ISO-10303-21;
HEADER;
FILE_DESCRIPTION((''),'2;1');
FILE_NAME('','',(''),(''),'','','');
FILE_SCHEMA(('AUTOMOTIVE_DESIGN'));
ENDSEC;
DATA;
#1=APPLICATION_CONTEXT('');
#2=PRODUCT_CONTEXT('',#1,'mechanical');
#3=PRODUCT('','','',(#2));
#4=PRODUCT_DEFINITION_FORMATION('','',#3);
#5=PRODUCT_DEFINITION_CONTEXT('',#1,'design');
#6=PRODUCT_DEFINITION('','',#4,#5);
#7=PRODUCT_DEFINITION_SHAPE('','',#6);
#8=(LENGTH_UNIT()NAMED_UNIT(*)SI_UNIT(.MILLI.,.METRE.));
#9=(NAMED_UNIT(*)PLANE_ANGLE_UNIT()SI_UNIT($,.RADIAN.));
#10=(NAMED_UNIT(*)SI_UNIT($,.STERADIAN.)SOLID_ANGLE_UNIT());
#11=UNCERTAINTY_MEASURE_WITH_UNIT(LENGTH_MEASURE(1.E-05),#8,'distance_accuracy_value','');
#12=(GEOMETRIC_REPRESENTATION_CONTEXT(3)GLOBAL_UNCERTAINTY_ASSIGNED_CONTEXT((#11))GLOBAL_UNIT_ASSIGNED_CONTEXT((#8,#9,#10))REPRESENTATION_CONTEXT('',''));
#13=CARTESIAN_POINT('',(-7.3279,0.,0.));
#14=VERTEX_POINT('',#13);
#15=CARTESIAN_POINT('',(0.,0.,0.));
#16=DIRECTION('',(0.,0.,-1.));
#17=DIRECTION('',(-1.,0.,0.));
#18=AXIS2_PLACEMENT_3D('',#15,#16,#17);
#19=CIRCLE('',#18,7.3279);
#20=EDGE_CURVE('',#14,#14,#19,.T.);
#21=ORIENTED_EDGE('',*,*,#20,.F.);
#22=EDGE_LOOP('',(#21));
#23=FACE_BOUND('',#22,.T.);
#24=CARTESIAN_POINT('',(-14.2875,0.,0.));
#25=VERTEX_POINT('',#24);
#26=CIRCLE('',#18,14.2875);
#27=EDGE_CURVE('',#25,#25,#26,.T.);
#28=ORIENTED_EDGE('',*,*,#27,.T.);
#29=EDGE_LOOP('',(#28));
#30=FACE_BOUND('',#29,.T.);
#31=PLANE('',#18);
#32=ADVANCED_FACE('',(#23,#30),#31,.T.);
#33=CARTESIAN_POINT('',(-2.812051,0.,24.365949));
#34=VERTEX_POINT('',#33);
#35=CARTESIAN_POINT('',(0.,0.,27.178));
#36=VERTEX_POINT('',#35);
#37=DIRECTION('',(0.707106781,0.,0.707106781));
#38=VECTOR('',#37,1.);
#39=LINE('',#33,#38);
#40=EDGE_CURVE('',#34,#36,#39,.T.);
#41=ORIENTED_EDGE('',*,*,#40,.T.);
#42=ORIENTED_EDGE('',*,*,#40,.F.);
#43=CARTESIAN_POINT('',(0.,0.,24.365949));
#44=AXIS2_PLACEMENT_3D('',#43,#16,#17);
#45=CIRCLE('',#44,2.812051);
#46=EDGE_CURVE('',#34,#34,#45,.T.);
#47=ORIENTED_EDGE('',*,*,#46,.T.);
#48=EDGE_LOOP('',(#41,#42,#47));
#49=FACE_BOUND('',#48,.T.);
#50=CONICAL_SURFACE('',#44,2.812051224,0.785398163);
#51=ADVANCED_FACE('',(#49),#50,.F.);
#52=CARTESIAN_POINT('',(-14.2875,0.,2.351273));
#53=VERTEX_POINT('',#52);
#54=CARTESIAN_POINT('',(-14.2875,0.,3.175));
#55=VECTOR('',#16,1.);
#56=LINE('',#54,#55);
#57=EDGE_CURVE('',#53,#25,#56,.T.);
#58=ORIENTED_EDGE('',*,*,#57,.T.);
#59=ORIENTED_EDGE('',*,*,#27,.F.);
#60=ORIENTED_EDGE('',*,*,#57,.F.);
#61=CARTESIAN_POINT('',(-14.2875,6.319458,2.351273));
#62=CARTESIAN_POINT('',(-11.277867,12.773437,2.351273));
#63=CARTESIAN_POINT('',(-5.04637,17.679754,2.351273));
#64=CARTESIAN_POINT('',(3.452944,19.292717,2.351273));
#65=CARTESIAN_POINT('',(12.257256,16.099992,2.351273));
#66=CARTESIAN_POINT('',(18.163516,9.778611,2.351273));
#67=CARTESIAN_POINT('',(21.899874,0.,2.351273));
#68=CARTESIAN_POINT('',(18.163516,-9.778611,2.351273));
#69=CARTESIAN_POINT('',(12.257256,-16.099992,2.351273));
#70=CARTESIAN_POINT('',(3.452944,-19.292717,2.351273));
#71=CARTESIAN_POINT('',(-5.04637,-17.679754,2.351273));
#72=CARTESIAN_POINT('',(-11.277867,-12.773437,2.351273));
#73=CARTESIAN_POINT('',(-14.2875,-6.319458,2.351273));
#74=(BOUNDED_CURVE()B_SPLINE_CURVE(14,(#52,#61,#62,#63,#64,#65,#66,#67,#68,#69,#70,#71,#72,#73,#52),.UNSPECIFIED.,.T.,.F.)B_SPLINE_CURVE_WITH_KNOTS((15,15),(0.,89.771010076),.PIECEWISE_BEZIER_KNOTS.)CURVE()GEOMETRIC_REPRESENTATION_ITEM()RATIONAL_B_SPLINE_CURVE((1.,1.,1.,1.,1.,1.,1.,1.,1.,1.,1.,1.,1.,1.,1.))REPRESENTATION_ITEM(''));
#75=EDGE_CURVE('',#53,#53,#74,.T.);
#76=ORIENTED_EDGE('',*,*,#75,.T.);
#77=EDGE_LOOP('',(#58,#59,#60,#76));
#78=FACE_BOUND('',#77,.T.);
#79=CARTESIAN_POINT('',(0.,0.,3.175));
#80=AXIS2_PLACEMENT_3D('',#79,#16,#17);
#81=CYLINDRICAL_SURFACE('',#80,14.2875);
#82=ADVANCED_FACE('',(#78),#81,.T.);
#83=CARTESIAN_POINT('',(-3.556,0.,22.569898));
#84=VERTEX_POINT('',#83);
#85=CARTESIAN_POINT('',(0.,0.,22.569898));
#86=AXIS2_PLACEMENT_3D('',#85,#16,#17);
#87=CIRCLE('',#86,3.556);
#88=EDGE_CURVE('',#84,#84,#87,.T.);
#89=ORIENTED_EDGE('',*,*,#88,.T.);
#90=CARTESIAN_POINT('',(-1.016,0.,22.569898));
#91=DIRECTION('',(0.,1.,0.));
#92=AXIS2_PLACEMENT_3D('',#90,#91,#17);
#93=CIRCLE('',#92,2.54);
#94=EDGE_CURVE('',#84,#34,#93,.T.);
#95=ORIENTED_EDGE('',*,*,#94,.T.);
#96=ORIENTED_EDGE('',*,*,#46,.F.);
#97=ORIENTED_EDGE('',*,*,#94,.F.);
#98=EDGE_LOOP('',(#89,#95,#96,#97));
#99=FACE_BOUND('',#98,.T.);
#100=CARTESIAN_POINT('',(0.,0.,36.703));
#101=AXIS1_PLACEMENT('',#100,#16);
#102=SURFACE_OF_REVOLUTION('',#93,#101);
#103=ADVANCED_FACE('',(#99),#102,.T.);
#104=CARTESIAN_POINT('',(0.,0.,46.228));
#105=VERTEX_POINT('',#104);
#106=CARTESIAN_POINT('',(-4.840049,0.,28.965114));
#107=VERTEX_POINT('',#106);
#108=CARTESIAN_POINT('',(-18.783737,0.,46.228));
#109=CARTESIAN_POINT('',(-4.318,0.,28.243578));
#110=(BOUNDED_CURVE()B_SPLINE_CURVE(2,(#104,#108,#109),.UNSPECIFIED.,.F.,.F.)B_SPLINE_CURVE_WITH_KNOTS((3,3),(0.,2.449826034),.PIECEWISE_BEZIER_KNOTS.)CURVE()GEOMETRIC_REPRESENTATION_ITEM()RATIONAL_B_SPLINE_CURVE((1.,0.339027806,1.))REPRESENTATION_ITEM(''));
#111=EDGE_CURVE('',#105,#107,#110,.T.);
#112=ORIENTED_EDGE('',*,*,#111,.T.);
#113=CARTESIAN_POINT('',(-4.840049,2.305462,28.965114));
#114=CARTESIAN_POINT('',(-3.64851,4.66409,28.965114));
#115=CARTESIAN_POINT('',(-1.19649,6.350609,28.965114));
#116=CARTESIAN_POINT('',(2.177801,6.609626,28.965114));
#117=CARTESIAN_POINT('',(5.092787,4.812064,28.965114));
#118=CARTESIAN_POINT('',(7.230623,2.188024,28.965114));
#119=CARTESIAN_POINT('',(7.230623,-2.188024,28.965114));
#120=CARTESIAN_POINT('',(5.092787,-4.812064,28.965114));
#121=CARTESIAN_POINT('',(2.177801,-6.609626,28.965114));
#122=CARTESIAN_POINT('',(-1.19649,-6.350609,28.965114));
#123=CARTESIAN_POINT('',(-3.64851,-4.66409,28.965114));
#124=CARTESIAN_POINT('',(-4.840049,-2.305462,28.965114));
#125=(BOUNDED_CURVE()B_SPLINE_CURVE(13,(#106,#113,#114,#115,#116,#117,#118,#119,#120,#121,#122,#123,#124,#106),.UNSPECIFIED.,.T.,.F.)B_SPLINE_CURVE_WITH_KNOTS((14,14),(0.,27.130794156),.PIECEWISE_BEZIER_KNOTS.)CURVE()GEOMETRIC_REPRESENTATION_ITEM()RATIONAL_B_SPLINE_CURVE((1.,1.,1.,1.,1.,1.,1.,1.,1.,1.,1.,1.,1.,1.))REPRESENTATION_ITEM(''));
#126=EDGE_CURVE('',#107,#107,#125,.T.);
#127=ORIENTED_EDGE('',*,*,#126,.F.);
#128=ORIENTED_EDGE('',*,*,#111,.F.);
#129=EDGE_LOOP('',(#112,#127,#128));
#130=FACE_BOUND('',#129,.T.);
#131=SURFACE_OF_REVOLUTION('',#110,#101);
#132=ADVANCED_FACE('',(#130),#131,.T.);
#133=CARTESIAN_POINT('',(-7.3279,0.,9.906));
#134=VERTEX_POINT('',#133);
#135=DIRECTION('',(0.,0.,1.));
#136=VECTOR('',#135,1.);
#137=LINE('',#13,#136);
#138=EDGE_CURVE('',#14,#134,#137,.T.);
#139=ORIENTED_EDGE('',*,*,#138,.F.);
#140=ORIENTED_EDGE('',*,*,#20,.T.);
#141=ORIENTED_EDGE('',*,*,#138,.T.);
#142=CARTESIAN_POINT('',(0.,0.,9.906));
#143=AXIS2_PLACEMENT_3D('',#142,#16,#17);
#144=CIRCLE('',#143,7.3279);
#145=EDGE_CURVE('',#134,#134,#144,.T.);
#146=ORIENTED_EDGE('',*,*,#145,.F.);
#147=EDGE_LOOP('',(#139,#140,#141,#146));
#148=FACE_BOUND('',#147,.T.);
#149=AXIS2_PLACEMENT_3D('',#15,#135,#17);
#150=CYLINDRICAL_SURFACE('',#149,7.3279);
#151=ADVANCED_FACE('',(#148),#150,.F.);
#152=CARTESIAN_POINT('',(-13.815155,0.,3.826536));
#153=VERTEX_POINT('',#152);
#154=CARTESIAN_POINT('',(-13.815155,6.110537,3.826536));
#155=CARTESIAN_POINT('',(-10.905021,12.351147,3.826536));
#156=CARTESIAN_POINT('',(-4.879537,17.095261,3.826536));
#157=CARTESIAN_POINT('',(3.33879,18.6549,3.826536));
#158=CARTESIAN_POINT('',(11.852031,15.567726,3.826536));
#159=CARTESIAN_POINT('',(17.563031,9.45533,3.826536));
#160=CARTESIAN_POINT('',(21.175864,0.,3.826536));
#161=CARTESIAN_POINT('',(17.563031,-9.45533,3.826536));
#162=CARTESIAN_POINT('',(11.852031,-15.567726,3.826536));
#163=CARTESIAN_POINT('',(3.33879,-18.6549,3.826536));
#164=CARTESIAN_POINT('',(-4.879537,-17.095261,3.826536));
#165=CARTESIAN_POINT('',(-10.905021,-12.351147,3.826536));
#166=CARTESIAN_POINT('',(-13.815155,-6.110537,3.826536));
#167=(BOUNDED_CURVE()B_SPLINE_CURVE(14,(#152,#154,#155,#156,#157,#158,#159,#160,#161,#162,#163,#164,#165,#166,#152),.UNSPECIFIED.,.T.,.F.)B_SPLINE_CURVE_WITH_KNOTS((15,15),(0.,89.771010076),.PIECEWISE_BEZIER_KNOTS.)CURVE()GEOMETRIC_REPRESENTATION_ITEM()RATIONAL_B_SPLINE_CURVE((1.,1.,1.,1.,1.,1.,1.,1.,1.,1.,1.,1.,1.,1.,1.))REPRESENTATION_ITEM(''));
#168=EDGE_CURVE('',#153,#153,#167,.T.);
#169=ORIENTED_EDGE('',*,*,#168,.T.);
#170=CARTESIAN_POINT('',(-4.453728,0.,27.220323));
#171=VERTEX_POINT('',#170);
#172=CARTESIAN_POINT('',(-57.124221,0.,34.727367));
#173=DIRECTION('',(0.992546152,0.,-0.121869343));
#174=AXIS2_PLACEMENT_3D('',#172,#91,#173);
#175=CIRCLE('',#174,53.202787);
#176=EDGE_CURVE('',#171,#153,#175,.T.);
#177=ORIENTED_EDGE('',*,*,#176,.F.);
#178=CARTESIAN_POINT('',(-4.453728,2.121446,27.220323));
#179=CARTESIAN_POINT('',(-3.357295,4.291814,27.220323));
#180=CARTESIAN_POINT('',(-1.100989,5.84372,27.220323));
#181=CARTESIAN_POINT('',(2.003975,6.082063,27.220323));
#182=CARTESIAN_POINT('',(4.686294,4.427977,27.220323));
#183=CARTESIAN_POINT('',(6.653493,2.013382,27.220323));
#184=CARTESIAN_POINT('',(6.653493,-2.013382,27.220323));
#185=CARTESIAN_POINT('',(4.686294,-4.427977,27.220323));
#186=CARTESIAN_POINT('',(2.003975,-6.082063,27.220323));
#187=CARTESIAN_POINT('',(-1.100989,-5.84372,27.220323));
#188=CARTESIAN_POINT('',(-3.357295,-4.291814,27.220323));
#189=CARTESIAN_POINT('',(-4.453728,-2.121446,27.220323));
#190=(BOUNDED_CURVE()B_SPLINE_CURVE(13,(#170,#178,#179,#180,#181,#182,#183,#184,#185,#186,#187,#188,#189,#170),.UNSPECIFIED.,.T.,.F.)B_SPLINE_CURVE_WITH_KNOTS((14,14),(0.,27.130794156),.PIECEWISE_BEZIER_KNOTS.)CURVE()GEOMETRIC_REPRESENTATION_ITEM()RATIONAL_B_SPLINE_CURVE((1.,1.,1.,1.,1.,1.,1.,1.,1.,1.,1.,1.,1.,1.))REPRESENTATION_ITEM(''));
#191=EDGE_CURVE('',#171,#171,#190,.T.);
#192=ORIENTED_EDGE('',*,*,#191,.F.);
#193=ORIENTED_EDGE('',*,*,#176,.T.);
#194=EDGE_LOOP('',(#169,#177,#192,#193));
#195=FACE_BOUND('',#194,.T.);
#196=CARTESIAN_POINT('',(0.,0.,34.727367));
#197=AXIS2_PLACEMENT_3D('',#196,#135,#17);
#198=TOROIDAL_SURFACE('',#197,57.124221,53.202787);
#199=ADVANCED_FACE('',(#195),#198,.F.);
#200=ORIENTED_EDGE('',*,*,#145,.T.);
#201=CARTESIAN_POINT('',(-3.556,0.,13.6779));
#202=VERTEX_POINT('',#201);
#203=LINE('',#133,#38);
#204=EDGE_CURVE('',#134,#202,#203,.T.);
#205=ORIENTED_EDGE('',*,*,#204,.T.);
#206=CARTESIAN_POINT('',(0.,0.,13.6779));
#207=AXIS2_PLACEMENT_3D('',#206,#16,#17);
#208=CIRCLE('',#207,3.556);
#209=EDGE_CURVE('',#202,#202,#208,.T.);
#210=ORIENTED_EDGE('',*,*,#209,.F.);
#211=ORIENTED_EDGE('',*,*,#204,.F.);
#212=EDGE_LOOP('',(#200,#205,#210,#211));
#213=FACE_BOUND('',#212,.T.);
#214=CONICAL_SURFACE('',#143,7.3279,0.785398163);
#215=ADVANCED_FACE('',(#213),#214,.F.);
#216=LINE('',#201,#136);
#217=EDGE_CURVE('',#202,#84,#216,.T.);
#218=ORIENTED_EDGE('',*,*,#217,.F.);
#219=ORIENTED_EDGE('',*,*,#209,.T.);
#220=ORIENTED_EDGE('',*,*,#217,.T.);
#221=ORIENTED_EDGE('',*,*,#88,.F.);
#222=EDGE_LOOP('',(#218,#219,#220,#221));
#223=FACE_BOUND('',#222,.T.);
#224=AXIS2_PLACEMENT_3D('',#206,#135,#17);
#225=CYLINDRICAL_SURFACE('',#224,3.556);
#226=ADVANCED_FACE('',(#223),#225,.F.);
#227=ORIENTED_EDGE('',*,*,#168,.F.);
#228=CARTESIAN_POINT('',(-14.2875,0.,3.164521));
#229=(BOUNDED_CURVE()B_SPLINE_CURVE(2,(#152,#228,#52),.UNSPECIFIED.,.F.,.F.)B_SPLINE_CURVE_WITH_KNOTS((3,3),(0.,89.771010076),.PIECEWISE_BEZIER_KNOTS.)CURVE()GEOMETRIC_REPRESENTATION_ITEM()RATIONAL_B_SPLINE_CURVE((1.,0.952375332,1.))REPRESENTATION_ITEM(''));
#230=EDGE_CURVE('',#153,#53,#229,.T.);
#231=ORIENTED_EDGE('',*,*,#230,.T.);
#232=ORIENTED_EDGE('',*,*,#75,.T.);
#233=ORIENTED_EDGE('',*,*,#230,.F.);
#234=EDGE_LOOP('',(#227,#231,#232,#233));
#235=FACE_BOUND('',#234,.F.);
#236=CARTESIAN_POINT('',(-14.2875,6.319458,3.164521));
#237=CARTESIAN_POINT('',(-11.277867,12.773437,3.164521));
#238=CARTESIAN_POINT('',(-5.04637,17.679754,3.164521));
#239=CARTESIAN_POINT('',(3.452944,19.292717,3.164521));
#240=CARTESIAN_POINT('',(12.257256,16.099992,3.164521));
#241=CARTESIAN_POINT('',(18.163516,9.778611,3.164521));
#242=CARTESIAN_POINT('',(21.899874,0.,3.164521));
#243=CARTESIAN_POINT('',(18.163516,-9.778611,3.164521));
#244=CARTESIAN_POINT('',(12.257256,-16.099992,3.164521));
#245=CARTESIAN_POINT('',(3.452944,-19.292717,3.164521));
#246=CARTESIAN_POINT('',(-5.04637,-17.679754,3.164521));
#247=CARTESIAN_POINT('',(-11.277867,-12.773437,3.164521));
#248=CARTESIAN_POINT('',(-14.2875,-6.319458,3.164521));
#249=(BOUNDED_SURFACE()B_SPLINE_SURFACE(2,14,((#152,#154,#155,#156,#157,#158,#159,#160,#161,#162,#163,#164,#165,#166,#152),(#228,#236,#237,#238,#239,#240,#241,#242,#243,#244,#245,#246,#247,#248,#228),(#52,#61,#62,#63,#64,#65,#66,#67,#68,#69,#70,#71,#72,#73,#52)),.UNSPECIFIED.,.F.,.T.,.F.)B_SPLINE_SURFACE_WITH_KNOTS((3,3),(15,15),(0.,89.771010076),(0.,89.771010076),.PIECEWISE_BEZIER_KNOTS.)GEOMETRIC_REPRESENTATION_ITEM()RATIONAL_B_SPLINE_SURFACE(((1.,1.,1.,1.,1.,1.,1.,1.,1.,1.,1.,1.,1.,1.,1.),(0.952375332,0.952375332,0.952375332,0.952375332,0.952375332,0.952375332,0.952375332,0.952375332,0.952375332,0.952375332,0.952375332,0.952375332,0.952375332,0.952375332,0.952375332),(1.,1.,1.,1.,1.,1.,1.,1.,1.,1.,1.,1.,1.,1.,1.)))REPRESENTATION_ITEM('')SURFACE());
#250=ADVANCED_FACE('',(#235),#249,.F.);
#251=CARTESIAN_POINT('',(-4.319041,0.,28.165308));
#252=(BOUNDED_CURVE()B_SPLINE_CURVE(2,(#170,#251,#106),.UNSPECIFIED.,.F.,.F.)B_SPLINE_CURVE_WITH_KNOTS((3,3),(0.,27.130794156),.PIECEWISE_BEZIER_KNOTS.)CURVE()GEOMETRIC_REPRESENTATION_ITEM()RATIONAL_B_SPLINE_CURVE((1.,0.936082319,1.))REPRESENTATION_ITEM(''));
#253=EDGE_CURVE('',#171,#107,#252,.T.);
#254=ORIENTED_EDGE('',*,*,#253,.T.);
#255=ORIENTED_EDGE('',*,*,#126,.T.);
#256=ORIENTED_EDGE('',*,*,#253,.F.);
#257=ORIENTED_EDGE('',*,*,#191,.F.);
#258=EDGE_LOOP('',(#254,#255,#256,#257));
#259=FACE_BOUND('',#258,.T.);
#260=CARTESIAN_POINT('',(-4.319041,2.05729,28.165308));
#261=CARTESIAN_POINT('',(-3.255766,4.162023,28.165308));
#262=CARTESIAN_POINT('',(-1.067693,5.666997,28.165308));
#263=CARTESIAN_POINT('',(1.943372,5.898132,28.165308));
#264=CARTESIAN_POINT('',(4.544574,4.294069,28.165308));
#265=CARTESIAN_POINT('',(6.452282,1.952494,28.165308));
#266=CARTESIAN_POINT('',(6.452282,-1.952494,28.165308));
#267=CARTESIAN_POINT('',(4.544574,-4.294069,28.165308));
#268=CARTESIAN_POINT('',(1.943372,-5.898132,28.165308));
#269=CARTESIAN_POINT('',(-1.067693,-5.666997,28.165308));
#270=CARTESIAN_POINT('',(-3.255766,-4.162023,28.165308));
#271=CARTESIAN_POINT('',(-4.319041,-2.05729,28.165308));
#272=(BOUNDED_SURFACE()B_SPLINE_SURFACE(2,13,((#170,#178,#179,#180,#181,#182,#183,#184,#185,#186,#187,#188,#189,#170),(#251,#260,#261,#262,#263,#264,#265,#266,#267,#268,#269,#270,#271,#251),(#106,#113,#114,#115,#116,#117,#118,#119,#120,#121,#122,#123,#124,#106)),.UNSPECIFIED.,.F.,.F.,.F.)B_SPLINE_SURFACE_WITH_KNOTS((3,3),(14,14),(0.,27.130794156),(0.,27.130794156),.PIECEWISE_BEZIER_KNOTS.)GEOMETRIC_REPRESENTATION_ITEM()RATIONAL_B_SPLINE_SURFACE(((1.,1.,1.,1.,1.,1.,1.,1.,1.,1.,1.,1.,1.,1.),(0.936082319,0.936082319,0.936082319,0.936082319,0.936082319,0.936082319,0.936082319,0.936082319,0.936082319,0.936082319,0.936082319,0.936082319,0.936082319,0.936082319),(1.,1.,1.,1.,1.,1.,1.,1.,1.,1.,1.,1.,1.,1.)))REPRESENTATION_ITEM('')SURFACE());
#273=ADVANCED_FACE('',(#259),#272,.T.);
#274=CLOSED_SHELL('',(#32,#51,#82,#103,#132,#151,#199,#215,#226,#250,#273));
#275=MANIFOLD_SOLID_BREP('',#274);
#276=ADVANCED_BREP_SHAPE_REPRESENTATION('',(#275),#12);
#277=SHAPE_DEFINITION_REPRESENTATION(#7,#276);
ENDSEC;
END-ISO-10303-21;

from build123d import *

# Parameters (mm, degrees)
F2_R = 2.54


with BuildPart() as f1:
    # F0 (on Front) → F1 (revolve)
    with BuildSketch(Plane.XZ):
        with BuildLine():
            ThreePointArc((-4.318, 28.2435778242), (-7.6873775939, 15.0668729236), (-14.2875, 3.175))
            Line((-14.2875, 3.175), (-14.2875, 0))
            Line((-14.2875, 0), (-7.3279, 0))
            Line((-7.3279, 0), (-7.3279, 9.906))
            Line((-7.3279, 9.906), (-3.556, 13.6779))
            Line((-3.556, 13.6779), (-3.556, 22.5698975516))
            ThreePointArc((-3.556, 22.5698975516), (-3.3626540126, 23.5419134698), (-2.8120512242, 24.3659487758))
            Line((-2.8120512242, 24.3659487758), (0, 27.178))
            Line((0, 27.178), (0, 46.228))
            add(Edge.make_bspline(
                [(0, 46.228), (-18.7837371747, 46.228), (-4.318, 28.2435778242)],
                knots=[0, 0, 0, 2.4498260338, 2.4498260338, 2.4498260338], degree=2, weights=[1, 0.3390278065, 1]))
        make_face()
    revolve(axis=Axis((0, 0, 36.703), (0, 0, -1)))

    # F2
    f2_edges = [f1.edges().sort_by_distance(p)[0] for p in [
        (4.318, 0, 28.243578),
        (14.2875, 0, 3.175),
    ]]
    fillet(f2_edges, radius=F2_R)


solid = f1.part
